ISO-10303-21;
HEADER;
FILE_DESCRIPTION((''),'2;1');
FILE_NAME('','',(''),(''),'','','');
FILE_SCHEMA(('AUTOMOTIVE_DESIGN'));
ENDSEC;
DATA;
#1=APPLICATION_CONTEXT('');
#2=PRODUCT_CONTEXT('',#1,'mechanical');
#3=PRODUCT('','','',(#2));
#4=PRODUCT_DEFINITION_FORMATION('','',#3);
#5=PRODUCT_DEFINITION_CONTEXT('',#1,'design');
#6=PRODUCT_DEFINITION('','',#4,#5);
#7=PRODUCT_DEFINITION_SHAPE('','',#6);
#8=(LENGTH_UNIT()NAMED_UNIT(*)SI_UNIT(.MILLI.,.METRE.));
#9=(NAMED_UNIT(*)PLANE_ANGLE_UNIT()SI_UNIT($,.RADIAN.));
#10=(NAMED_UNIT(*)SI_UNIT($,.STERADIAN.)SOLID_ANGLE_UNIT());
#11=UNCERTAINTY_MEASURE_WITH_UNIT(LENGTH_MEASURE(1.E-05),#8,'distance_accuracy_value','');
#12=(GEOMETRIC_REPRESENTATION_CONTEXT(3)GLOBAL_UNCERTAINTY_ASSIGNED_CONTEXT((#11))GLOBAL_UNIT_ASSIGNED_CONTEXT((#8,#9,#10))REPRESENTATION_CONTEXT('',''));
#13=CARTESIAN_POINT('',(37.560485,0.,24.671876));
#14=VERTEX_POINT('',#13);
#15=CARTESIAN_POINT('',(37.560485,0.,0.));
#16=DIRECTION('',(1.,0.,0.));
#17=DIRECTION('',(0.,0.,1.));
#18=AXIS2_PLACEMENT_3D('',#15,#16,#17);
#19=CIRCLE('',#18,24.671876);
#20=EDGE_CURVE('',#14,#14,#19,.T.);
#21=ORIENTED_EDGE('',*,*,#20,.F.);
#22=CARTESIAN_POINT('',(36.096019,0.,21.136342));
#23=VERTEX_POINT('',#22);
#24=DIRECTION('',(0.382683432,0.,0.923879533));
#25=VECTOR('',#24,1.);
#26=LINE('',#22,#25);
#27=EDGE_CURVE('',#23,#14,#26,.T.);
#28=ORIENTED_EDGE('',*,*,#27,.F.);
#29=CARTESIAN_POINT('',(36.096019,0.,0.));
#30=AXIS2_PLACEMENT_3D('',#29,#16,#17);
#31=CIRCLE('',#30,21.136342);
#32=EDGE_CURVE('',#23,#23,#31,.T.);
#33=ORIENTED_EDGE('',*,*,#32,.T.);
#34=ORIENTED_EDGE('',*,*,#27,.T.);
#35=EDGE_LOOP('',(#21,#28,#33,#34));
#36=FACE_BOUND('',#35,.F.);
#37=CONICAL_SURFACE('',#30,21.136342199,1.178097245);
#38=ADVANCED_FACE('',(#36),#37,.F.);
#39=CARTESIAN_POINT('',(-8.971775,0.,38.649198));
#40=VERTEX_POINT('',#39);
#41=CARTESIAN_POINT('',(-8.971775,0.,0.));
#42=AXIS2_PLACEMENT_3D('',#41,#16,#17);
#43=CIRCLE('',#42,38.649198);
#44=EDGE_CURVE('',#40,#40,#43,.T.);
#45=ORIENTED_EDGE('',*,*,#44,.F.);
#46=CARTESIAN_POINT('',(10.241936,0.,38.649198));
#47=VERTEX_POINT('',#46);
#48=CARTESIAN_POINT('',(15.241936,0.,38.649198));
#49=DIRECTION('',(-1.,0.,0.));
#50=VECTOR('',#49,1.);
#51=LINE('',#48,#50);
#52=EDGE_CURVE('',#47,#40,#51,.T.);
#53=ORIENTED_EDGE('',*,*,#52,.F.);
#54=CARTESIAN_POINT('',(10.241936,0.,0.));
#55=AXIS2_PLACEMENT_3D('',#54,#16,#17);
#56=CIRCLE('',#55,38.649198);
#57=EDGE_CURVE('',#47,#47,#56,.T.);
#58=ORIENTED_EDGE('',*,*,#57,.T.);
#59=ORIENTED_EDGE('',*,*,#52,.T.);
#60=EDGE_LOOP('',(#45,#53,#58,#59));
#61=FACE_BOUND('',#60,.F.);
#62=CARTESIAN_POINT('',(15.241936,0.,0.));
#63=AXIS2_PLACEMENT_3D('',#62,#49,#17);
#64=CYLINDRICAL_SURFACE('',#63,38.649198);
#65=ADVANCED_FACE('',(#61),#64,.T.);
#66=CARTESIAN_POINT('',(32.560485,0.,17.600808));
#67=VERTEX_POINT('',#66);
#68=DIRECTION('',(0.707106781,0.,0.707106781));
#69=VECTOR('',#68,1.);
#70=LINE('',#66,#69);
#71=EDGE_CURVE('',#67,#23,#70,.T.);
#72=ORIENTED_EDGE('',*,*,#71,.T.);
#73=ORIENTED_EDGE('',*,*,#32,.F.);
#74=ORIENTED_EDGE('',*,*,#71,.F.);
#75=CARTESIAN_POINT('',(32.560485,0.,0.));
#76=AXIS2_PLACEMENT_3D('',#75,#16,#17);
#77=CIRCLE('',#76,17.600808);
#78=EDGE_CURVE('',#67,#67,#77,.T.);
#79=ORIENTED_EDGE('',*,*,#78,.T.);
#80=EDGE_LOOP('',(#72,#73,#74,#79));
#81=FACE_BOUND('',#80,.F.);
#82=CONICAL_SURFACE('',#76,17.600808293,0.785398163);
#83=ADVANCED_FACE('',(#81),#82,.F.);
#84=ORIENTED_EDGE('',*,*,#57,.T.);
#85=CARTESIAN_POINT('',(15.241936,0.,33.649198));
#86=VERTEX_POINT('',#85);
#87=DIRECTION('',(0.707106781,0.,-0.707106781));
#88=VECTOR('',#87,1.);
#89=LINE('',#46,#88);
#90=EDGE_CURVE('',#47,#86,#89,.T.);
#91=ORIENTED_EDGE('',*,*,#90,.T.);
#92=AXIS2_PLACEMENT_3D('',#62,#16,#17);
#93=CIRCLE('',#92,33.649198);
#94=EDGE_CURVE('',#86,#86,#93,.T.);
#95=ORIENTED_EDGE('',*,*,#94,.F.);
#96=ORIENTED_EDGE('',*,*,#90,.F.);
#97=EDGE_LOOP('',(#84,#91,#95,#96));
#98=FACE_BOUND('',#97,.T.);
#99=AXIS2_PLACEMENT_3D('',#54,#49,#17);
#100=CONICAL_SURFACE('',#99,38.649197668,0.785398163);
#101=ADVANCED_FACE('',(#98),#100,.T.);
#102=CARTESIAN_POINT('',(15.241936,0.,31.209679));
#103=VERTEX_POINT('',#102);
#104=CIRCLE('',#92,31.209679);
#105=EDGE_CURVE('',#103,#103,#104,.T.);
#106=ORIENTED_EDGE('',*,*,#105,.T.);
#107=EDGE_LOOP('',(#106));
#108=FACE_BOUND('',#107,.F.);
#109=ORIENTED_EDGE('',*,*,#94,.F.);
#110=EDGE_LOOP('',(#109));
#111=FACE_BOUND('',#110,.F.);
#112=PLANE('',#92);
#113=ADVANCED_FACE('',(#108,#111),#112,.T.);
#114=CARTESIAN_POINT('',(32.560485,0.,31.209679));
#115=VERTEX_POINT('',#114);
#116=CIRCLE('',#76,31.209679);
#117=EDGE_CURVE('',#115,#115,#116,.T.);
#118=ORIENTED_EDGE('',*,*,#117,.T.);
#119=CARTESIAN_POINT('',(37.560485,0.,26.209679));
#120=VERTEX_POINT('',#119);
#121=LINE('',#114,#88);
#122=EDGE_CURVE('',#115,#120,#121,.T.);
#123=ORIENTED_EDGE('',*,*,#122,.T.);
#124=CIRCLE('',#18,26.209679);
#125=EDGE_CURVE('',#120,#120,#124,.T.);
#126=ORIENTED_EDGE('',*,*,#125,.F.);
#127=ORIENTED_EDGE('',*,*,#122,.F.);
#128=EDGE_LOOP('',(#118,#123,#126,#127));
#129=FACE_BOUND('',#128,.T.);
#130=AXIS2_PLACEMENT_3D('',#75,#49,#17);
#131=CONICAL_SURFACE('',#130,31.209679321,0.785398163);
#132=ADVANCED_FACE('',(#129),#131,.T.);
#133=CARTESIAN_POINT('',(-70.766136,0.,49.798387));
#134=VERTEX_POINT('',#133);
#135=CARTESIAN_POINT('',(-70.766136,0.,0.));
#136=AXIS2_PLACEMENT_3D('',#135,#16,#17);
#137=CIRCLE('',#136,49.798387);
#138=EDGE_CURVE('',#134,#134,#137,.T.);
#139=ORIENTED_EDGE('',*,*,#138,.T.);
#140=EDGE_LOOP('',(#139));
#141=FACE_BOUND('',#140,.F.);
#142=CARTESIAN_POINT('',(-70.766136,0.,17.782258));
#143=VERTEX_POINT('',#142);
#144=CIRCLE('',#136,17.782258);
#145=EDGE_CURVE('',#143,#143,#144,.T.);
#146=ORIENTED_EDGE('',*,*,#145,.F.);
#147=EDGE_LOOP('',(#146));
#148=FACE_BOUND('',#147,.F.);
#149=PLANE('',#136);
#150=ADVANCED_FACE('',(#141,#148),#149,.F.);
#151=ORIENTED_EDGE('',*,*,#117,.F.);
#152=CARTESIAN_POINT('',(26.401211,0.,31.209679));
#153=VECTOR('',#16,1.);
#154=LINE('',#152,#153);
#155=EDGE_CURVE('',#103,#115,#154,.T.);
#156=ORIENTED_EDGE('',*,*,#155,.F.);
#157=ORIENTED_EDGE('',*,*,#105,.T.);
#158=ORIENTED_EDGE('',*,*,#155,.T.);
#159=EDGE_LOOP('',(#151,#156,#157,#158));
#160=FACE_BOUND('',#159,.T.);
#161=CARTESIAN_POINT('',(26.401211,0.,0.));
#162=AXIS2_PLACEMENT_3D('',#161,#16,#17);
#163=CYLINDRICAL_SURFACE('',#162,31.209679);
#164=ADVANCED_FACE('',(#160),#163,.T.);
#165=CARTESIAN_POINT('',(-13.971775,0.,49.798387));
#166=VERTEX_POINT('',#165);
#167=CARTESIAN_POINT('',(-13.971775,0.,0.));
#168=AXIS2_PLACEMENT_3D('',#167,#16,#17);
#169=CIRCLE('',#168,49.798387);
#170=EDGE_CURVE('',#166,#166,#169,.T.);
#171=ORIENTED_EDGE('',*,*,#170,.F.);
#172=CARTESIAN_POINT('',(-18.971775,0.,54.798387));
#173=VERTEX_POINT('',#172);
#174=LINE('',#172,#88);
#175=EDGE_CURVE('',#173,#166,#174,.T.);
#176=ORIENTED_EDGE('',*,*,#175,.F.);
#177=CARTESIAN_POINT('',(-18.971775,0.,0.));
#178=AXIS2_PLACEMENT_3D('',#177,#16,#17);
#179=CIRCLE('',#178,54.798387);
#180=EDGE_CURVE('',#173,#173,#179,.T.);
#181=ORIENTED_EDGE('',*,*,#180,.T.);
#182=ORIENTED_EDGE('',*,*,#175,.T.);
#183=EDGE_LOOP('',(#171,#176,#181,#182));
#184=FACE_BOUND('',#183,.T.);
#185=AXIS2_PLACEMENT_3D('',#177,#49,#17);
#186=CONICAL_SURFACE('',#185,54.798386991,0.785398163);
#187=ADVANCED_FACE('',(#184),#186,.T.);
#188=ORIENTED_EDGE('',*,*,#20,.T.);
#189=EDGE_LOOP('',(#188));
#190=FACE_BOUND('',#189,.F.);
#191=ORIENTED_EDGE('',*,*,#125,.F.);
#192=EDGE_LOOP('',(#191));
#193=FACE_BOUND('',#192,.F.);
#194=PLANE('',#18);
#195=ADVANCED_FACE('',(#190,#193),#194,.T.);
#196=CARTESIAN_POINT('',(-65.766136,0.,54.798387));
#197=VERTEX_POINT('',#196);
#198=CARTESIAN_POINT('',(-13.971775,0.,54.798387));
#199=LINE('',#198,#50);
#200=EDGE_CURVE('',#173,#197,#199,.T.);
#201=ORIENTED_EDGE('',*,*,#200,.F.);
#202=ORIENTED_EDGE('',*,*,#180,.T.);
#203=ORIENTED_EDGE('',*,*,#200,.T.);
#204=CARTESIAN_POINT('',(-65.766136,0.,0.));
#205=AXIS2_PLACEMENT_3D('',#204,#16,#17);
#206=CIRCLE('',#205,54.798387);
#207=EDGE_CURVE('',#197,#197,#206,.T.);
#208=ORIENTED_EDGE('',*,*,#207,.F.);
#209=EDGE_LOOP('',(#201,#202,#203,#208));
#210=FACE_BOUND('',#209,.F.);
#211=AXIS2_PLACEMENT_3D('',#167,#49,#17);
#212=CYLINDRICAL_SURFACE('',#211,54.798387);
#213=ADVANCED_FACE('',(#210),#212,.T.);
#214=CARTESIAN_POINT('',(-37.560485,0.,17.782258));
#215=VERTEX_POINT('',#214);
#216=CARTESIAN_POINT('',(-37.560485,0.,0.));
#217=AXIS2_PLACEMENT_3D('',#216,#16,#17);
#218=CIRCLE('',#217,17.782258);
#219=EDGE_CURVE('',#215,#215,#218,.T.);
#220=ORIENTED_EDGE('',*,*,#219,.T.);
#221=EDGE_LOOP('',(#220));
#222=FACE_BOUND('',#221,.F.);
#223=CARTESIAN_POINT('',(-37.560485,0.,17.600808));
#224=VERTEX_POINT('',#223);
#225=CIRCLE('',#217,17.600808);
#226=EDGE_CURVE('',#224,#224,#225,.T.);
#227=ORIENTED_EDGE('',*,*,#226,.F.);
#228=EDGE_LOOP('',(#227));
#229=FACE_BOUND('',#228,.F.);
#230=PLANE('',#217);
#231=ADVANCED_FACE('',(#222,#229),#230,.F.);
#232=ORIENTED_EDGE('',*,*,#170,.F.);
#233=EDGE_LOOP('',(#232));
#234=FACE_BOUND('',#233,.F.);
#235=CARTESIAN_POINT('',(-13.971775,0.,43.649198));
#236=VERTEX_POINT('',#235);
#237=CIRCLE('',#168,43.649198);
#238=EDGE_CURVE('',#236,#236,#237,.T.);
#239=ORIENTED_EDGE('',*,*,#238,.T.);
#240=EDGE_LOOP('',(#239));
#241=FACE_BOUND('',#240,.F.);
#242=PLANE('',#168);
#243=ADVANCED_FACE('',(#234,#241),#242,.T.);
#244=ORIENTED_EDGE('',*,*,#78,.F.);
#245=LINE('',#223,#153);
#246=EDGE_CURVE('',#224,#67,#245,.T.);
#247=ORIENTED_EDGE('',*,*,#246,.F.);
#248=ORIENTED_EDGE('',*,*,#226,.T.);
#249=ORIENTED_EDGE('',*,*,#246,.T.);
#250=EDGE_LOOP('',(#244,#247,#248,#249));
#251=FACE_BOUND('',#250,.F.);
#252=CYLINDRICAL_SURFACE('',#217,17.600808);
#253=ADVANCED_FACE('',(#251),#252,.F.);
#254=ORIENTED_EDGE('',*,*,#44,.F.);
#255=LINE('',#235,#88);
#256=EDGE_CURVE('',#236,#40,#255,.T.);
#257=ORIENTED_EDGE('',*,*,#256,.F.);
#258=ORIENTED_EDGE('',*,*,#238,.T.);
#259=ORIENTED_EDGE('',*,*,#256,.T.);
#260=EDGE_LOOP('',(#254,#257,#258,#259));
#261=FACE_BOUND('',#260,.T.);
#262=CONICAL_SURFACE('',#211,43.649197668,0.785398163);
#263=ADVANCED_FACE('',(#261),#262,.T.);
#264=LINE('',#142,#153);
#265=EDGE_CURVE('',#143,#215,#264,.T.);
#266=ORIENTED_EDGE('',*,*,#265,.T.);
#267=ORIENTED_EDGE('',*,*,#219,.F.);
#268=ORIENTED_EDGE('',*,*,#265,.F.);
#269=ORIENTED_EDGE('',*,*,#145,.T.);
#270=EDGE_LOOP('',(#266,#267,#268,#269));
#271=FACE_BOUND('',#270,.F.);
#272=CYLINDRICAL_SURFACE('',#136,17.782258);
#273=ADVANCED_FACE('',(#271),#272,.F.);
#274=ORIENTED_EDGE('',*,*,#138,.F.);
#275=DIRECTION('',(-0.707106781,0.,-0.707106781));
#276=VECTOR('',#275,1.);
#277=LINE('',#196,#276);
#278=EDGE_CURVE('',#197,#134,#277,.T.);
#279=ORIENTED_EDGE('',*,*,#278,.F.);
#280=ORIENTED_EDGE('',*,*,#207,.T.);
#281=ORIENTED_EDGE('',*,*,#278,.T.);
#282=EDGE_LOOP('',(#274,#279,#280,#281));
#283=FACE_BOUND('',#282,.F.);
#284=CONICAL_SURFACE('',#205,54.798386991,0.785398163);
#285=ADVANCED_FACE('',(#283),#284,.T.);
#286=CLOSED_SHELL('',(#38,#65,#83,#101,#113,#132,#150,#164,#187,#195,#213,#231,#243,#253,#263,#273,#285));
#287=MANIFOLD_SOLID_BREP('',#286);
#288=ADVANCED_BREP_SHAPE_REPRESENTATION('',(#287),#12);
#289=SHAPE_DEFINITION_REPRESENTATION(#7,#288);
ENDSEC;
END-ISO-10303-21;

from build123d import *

# Parameters (mm, degrees)
F1_W    = 23.5887104645
F1_H    = 20.866939798
F1_W_2  = 22.3185494542
F1_H_2  = 13.6088710278
F1_W_3  = 19.2338721827
F3_SIZE = 5


# Not quite as in the source:
# - a fillet or chamfer that OpenCascade refuses, or shapes differently, is made with other operations: its cross-section is extruded or revolved along the edge and cut away or added


with BuildPart() as f2:
    # F1 (on Front) → F2 (revolve)
    with BuildSketch(Plane.XZ):
        Polygon((-13.9717748389, 54.798386991), (-70.7661360502, 54.798386991), (-70.7661360502, 17.7822578698), (-37.5604853034, 17.7822578698), (-37.5604853034, 38.6491976678), (-13.9717748389, 38.6491976678), align=None)
        Polygon((15.2419358492, 38.6491976678), (-13.9717748389, 38.6491976678), (-13.9717748389, 17.7822578698), (-37.5604853034, 17.7822578698), (-37.5604853034, 17.6008082926), (-3.9919363335, 17.6008082926), (-3.9919363335, 31.2096793205), (15.2419358492, 31.2096793205), align=None)
        with Locations((-25.7661300711, 28.2157277688)):
            Rectangle(F1_W, F1_H)
        with Locations((26.4012105763, 24.4052438065)):
            Rectangle(F1_W_2, F1_H_2)
        with Locations((5.6249997579, 24.4052438065)):
            Rectangle(F1_W_3, F1_H_2)
    revolve(axis=Axis((0.2721734345, 0, 0), (1, 0, 0)))

    # F3
    f3_edges = [f2.edges().sort_by_distance(p)[0] for p in [
        (-13.971775, 0, -54.798387),
        (-70.766136, 0, -54.798387),
        (-42.368955, 0, 54.798387),
        (37.560485, 0, -17.600808),
    ]]
    chamfer(f3_edges, length=F3_SIZE)

    # F4: chamfer of 5 on 5 edges, made by hand

    # F4_s1 → F4_t2 (revolve)
    with BuildSketch(Plane.XZ):
        Polygon((-13.9717748389, 43.6491976678), (-8.9717748389, 38.6491976678), (-13.9717748389, 38.6491976678), align=None)
    revolve(axis=Axis((-13.9717748389, 0, 0), (1, 0, 0)))

    # F4_s3 → F4_t4 (revolve, cut)
    with BuildSketch(Plane.XZ):
        Polygon((32.5604853034, 31.2096793205), (37.5604853034, 26.2096793205), (37.5604853034, 31.2096793205), align=None)
    revolve(axis=Axis((37.5604853034, 0, 0), (1, 0, 0)), mode=Mode.SUBTRACT)

    # F4_s5 → F4_t6 (revolve, cut)
    with BuildSketch(Plane.XZ):
        Polygon((36.0960192093, 21.1363421986), (37.5604853034, 24.6718761045), (37.5604853034, 22.6008082926), align=None)
    revolve(axis=Axis((37.5604853034, 0, 0), (1, 0, 0)), mode=Mode.SUBTRACT)

    # F4_s7 → F4_t8 (revolve, cut)
    with BuildSketch(Plane.XZ):
        Polygon((10.2419358492, 38.6491976678), (15.2419358492, 33.6491976678), (15.2419358492, 38.6491976678), align=None)
    revolve(axis=Axis((15.2419358492, 0, 0), (1, 0, 0)), mode=Mode.SUBTRACT)


solid = f2.part
